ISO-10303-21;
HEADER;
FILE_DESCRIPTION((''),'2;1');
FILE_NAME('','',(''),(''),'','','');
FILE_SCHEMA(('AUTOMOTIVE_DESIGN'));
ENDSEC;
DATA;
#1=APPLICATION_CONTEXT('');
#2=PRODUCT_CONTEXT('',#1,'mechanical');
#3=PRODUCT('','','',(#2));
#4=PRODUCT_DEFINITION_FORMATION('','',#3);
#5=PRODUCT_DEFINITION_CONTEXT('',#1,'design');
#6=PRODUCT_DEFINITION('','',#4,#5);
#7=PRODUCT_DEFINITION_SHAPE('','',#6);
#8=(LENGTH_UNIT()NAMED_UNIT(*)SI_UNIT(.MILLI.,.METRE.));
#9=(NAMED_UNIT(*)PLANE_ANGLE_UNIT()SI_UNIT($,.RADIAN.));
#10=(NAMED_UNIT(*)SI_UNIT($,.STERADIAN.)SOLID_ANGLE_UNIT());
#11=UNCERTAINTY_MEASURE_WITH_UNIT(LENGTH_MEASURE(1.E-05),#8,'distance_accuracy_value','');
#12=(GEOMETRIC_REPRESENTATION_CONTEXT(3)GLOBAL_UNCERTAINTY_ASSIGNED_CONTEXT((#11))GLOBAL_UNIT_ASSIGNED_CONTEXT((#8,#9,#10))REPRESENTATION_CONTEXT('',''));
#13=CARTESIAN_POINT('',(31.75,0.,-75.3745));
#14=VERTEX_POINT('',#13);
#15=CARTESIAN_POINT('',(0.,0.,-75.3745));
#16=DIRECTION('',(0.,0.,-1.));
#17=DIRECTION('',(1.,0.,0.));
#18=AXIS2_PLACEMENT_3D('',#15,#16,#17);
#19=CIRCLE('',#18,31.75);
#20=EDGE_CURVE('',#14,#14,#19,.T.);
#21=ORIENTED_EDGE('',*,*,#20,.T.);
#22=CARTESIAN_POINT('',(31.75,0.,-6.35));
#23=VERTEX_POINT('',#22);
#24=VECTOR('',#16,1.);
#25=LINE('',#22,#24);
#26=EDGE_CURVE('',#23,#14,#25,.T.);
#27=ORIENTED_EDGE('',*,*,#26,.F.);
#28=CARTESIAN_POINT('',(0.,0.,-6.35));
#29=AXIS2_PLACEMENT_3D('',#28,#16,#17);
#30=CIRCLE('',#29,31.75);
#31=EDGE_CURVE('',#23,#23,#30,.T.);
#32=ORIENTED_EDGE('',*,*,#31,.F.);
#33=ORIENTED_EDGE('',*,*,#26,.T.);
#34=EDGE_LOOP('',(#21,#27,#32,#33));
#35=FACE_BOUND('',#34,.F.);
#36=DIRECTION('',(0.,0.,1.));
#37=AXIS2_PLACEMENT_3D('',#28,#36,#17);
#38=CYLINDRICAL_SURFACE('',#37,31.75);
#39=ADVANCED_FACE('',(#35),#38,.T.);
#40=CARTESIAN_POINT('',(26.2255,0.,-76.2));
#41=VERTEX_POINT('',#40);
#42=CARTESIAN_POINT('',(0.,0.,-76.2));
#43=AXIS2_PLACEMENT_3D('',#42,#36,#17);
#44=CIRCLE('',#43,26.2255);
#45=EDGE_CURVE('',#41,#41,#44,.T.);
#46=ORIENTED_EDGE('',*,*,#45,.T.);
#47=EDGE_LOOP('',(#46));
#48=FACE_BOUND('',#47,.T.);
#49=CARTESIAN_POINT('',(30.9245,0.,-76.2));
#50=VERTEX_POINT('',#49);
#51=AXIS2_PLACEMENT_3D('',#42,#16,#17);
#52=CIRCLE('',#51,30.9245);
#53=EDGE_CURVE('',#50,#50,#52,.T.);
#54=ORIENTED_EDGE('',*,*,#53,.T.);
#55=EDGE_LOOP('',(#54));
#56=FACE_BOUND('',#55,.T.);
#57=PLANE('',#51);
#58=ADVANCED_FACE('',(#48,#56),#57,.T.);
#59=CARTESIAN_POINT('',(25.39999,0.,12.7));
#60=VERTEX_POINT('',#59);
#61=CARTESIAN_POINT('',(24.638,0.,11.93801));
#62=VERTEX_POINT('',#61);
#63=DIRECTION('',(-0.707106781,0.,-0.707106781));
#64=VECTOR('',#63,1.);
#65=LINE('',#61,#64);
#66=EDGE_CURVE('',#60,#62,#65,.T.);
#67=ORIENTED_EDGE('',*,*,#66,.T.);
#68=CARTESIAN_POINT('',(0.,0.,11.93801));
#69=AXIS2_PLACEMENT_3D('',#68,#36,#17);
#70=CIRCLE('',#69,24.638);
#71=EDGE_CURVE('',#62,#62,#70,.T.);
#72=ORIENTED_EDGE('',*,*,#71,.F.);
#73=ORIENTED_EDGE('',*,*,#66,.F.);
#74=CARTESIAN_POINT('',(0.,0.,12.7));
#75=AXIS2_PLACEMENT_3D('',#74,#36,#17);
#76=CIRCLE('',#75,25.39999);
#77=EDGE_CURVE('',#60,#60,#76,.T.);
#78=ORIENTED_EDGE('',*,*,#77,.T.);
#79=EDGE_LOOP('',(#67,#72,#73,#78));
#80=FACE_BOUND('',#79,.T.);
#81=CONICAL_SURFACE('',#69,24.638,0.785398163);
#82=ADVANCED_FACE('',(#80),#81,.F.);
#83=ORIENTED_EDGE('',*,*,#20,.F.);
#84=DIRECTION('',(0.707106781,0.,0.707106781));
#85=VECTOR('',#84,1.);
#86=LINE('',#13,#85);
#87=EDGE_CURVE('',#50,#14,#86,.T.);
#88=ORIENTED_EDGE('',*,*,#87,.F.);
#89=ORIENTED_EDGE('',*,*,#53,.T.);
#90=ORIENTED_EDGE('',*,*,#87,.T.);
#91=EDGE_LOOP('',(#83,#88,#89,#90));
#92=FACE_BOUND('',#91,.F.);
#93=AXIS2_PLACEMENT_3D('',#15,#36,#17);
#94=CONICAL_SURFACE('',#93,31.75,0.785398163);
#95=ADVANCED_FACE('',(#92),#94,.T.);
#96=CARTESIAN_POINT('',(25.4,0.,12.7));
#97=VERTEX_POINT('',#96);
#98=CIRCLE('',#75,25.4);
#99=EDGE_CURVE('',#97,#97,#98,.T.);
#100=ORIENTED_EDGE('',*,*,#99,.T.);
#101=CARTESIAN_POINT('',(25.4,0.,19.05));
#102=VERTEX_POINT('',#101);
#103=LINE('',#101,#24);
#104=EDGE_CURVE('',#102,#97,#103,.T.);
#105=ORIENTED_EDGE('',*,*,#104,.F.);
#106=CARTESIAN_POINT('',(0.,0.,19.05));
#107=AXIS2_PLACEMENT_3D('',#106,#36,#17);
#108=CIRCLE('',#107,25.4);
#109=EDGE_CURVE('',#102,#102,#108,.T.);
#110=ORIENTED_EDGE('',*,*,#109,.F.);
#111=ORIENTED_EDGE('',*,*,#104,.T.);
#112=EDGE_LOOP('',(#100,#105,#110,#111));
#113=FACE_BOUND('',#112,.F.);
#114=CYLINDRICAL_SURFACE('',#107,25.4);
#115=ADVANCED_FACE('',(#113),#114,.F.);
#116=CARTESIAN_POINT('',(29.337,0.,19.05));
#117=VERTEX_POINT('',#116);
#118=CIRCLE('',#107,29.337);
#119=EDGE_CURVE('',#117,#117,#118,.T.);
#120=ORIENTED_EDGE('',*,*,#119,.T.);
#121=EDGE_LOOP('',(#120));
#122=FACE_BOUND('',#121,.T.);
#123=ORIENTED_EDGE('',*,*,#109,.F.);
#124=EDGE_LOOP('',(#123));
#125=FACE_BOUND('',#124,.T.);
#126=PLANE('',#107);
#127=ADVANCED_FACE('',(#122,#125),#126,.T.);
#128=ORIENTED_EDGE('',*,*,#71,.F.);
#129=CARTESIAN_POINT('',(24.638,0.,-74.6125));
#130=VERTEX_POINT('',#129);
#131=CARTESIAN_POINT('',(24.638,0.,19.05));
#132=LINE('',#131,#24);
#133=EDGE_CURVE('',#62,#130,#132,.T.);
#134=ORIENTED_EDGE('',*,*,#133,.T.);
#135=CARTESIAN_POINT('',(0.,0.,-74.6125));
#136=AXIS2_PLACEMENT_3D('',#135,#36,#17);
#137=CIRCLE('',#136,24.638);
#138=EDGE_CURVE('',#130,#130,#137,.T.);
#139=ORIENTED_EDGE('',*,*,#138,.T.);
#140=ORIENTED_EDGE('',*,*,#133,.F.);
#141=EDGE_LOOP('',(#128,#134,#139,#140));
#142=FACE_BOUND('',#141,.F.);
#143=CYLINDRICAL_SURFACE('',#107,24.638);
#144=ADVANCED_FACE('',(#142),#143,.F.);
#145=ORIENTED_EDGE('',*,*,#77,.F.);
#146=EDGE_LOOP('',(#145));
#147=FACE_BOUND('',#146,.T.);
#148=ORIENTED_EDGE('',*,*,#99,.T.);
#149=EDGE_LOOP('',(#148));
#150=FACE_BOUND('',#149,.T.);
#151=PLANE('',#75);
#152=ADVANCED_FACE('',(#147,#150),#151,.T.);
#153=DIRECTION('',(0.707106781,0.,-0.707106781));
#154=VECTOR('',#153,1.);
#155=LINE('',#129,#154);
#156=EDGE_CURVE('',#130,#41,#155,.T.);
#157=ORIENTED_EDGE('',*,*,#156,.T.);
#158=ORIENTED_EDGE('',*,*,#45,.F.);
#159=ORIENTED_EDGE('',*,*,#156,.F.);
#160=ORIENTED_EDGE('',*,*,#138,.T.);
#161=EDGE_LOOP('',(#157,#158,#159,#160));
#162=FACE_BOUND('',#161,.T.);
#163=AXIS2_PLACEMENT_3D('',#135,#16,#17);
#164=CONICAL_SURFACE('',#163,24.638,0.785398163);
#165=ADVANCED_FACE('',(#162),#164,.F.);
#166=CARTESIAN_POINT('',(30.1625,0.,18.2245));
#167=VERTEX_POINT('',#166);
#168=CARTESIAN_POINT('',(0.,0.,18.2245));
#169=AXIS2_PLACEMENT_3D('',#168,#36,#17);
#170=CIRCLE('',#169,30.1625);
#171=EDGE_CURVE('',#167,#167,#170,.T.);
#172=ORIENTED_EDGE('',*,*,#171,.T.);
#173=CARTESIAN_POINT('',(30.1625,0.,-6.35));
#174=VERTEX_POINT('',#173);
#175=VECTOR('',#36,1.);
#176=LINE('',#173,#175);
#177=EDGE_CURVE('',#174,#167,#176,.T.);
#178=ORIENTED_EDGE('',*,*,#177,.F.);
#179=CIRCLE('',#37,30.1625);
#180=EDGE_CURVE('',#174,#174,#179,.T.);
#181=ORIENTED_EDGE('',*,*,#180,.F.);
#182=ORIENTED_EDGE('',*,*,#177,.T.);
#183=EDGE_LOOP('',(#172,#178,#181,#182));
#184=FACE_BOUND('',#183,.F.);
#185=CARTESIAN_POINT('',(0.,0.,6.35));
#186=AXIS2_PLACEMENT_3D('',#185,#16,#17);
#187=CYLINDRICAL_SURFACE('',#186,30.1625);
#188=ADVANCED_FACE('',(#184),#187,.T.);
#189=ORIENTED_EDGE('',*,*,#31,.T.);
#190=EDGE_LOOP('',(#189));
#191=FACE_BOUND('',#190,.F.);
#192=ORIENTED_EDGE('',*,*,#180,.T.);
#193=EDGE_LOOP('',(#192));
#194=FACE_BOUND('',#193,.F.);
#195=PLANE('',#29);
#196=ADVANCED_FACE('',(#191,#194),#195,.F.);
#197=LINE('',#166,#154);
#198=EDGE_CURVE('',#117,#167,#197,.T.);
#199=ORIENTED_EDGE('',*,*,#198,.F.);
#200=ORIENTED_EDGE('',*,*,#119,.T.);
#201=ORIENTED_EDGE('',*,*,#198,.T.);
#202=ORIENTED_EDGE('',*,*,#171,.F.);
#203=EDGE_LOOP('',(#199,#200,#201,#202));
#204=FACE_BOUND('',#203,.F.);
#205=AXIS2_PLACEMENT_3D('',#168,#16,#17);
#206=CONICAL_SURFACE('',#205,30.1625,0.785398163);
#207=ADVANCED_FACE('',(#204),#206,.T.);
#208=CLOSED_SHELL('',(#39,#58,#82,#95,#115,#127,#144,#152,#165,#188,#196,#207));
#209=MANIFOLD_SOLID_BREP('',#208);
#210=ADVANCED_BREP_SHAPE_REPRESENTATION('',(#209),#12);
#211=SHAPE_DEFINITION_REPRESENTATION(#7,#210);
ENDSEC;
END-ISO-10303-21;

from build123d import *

# Parameters (mm, degrees)
F0_R     = 30.1625
F1_DEPTH = 6.35
F2_R     = 31.75
F3_DEPTH = 69.85
F4_R     = 30.1625
F5_DEPTH = 12.7
F6_R     = 24.638
F7_DEPTH = 95.251
F8_R     = 25.4
F9_DEPTH = 6.35
F10_SIZE = 0.76199
F11_SIZE = 1.5875
F12_SIZE = 0.8255


# Not quite as in the source:
# - a fillet or chamfer is up to 0.001 mm smaller than in the source, because OpenCascade refuses the exact size


with BuildPart() as f1:
    # F0 (on Top) → F1 (new body, symmetric)
    with BuildSketch(Plane.XY):
        Circle(F0_R)
    extrude(amount=F1_DEPTH, both=True)

    # F2 (on face) → F3 (join)
    with BuildSketch(Plane(origin=(0, 0, -6.35), x_dir=(1, 0, 0), z_dir=(0, 0, -1))):
        Circle(F2_R)
    extrude(amount=F3_DEPTH)

    # F4 (on face) → F5 (join)
    with BuildSketch(Plane.XY.offset(6.35)):
        Circle(F4_R)
    extrude(amount=F5_DEPTH)

    # F6 (on face) → F7 (cut, through all)
    with BuildSketch(Plane.XY.offset(19.05)):
        Circle(F6_R)
    extrude(amount=-F7_DEPTH, mode=Mode.SUBTRACT)

    # F8 (on face) → F9 (cut)
    with BuildSketch(Plane.XY.offset(19.05)):
        Circle(F8_R)
    extrude(amount=-F9_DEPTH, mode=Mode.SUBTRACT)

    # F10 (size 0.762 in the source; OpenCascade refuses exactly that, so slightly less here)
    f10_edges = [f1.edges().sort_by_distance(p)[0] for p in [
        (-24.638, 0, 12.7),
    ]]
    chamfer(f10_edges, length=F10_SIZE)

    # F11
    f11_edges = [f1.edges().sort_by_distance(p)[0] for p in [
        (-24.638, 0, -76.2),
    ]]
    chamfer(f11_edges, length=F11_SIZE)

    # F12
    f12_edges = [f1.edges().sort_by_distance(p)[0] for p in [
        (-31.75, 0, -76.2),
        (-30.1625, 0, 19.05),
    ]]
    chamfer(f12_edges, length=F12_SIZE)


solid = f1.part
